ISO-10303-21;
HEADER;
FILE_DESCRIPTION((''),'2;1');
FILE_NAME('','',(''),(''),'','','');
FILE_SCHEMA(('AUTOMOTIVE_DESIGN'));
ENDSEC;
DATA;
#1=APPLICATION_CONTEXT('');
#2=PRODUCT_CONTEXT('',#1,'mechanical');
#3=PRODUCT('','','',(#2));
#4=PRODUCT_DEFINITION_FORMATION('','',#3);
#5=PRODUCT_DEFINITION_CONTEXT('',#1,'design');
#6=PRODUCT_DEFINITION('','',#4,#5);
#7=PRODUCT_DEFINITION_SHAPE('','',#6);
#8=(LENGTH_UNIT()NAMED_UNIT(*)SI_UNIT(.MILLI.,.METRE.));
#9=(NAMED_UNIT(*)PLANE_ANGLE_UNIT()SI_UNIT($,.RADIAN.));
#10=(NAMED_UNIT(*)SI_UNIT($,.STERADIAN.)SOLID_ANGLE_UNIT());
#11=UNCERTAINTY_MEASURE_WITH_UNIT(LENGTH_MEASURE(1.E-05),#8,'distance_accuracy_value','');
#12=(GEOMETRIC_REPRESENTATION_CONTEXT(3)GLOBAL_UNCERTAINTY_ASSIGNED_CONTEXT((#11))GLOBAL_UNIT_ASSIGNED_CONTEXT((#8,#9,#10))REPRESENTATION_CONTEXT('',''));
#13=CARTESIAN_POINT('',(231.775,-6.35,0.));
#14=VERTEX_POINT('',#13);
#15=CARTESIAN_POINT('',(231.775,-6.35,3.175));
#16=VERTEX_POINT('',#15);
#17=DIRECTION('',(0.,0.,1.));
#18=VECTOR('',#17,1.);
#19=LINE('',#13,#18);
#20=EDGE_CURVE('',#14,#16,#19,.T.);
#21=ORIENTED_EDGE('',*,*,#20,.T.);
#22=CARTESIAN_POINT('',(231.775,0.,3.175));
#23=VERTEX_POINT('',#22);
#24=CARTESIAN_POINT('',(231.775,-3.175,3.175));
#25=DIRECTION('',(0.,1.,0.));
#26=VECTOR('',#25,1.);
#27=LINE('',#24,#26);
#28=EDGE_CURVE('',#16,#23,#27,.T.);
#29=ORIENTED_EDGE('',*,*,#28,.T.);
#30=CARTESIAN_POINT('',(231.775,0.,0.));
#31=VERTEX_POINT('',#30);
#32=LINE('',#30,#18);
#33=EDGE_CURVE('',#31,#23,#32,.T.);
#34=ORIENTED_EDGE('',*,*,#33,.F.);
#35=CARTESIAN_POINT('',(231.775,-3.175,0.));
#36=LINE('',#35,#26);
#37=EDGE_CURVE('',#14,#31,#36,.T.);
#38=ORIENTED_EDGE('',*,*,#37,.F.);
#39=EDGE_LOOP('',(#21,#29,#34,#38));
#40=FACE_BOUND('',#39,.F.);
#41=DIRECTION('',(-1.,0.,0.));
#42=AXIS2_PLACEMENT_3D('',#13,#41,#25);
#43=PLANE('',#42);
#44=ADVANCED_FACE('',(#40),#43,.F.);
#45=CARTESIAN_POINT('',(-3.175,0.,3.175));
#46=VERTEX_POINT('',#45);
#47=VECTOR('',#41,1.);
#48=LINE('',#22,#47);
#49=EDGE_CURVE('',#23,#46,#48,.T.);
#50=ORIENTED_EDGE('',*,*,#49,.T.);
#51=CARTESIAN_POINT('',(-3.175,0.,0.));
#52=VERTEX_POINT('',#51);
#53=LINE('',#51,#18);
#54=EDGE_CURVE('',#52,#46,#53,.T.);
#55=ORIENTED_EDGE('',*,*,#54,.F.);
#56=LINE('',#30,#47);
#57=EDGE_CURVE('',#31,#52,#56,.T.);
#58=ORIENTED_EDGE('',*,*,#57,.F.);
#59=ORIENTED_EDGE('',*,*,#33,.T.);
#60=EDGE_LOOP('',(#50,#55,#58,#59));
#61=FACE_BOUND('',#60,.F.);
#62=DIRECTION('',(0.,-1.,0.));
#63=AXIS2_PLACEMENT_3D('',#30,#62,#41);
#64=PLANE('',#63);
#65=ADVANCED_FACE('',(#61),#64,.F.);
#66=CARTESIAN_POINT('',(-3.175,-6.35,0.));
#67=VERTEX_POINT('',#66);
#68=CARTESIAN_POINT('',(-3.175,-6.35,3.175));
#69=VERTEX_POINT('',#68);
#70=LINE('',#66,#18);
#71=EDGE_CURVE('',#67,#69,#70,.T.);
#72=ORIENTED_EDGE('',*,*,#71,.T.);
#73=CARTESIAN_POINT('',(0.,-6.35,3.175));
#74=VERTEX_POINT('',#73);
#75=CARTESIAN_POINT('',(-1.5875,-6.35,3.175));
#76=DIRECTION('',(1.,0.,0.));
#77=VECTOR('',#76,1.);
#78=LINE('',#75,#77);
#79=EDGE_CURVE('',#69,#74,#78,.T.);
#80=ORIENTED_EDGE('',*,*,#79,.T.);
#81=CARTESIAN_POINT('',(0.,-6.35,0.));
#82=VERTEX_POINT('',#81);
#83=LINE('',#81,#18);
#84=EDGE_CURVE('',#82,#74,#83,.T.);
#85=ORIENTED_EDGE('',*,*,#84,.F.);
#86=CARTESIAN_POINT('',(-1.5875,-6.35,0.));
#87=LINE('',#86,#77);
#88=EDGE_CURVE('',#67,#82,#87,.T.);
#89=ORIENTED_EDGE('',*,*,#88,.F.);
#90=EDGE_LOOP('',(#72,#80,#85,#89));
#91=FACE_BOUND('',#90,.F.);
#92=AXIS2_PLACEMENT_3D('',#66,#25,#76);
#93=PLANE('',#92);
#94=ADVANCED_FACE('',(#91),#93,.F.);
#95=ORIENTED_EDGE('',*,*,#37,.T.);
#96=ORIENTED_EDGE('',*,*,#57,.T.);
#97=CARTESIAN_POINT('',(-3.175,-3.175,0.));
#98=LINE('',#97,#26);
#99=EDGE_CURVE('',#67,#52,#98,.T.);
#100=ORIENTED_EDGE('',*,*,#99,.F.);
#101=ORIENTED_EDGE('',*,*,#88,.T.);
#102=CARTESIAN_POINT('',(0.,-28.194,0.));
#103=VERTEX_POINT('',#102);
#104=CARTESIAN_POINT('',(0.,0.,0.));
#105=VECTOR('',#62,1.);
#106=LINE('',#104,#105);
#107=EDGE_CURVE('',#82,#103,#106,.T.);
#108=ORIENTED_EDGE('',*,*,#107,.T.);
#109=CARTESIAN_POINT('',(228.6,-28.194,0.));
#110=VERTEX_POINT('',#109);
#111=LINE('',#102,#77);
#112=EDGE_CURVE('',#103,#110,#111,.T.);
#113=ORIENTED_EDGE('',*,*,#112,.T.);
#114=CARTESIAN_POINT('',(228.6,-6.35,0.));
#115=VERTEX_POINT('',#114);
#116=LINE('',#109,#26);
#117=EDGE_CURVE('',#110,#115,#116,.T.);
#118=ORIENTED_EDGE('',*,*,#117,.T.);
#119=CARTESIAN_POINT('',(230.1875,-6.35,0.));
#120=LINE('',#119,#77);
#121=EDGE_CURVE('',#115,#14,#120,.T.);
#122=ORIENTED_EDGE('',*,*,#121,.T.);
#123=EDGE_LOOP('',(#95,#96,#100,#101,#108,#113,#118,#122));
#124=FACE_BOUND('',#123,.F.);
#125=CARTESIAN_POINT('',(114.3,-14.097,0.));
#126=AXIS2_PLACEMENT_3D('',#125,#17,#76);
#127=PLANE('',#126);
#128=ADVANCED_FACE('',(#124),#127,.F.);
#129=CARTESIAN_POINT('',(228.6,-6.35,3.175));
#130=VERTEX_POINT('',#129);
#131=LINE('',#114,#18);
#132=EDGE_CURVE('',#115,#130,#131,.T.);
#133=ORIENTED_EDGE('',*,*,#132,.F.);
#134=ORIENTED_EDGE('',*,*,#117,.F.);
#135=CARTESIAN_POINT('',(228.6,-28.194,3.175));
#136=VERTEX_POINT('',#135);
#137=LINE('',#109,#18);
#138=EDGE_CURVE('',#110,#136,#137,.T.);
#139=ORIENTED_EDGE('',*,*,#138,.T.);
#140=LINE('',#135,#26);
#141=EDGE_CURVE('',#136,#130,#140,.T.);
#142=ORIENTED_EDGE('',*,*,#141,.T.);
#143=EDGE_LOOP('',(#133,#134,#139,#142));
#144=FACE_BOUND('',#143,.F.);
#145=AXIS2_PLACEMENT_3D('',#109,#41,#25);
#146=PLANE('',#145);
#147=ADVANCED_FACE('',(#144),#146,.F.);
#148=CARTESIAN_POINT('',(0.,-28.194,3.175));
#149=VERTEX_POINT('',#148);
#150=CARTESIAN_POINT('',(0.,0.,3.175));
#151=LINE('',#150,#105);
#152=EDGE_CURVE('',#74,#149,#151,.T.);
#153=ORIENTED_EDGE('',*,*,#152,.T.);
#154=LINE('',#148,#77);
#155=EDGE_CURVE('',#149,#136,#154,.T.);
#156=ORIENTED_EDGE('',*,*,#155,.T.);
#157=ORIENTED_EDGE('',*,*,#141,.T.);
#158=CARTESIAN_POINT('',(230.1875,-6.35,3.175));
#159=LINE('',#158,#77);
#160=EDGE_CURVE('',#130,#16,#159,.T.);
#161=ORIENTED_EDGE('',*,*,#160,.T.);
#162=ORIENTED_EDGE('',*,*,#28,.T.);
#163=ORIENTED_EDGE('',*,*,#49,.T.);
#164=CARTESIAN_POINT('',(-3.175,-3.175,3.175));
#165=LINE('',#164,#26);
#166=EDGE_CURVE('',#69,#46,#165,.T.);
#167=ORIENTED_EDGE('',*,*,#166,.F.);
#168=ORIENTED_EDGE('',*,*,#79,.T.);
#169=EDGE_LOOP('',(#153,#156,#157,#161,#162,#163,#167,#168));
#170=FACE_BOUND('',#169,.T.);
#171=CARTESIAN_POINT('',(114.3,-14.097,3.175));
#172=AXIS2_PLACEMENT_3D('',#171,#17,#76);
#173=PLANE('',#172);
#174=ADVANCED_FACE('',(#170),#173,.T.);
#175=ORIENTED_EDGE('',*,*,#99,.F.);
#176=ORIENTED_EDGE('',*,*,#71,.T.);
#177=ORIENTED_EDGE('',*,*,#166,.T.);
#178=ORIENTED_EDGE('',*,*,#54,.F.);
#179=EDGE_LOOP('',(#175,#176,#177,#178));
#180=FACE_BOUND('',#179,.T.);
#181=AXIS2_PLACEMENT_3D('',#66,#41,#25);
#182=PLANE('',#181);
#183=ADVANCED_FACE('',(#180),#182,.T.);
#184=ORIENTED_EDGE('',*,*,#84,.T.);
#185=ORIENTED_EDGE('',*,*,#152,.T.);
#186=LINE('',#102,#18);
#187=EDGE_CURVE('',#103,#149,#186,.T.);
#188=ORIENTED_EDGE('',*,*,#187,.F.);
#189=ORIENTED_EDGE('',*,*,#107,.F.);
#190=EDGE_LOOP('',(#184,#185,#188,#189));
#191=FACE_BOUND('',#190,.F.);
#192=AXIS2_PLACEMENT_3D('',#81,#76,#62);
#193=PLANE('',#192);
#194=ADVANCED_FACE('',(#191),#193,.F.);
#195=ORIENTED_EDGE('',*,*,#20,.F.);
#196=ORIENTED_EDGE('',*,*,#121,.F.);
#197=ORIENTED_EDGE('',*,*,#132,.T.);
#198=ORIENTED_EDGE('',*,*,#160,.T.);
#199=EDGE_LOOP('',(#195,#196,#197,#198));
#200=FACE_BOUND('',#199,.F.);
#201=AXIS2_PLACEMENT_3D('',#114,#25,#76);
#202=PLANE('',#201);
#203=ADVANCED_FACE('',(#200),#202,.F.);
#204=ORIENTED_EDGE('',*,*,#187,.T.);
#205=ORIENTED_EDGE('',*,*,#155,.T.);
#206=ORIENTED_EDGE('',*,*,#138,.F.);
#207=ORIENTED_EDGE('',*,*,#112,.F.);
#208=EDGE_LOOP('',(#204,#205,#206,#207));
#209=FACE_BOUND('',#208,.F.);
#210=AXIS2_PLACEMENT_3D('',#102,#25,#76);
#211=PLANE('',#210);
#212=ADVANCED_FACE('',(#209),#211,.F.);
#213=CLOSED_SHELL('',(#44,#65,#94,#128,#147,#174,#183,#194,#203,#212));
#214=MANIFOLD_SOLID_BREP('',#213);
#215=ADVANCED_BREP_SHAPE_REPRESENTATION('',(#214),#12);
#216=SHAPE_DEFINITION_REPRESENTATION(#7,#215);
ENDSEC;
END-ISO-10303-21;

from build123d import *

# Parameters (mm, degrees)
F0_W     = 3.175
F0_H     = 6.35
F1_DEPTH = 3.175


# Not quite as in the source:
# - a length typed as a fraction of an inch, garbled in the dataset ("3 / 203.2 mm" for 3/8 in), is restored


with BuildPart() as f1:
    # F0 (on Top) → F1 (new body)
    with BuildSketch(Plane.XY):
        Polygon((228.6, 0), (0, 0), (0, -6.35), (0, -28.194), (228.6, -28.194), (228.6, -6.35), align=None)
        with Locations((230.1875, -3.175)):
            Rectangle(F0_W, F0_H)
        with Locations((-1.5875, -3.175)):
            Rectangle(F0_W, F0_H)
    extrude(amount=F1_DEPTH)


solid = f1.part
